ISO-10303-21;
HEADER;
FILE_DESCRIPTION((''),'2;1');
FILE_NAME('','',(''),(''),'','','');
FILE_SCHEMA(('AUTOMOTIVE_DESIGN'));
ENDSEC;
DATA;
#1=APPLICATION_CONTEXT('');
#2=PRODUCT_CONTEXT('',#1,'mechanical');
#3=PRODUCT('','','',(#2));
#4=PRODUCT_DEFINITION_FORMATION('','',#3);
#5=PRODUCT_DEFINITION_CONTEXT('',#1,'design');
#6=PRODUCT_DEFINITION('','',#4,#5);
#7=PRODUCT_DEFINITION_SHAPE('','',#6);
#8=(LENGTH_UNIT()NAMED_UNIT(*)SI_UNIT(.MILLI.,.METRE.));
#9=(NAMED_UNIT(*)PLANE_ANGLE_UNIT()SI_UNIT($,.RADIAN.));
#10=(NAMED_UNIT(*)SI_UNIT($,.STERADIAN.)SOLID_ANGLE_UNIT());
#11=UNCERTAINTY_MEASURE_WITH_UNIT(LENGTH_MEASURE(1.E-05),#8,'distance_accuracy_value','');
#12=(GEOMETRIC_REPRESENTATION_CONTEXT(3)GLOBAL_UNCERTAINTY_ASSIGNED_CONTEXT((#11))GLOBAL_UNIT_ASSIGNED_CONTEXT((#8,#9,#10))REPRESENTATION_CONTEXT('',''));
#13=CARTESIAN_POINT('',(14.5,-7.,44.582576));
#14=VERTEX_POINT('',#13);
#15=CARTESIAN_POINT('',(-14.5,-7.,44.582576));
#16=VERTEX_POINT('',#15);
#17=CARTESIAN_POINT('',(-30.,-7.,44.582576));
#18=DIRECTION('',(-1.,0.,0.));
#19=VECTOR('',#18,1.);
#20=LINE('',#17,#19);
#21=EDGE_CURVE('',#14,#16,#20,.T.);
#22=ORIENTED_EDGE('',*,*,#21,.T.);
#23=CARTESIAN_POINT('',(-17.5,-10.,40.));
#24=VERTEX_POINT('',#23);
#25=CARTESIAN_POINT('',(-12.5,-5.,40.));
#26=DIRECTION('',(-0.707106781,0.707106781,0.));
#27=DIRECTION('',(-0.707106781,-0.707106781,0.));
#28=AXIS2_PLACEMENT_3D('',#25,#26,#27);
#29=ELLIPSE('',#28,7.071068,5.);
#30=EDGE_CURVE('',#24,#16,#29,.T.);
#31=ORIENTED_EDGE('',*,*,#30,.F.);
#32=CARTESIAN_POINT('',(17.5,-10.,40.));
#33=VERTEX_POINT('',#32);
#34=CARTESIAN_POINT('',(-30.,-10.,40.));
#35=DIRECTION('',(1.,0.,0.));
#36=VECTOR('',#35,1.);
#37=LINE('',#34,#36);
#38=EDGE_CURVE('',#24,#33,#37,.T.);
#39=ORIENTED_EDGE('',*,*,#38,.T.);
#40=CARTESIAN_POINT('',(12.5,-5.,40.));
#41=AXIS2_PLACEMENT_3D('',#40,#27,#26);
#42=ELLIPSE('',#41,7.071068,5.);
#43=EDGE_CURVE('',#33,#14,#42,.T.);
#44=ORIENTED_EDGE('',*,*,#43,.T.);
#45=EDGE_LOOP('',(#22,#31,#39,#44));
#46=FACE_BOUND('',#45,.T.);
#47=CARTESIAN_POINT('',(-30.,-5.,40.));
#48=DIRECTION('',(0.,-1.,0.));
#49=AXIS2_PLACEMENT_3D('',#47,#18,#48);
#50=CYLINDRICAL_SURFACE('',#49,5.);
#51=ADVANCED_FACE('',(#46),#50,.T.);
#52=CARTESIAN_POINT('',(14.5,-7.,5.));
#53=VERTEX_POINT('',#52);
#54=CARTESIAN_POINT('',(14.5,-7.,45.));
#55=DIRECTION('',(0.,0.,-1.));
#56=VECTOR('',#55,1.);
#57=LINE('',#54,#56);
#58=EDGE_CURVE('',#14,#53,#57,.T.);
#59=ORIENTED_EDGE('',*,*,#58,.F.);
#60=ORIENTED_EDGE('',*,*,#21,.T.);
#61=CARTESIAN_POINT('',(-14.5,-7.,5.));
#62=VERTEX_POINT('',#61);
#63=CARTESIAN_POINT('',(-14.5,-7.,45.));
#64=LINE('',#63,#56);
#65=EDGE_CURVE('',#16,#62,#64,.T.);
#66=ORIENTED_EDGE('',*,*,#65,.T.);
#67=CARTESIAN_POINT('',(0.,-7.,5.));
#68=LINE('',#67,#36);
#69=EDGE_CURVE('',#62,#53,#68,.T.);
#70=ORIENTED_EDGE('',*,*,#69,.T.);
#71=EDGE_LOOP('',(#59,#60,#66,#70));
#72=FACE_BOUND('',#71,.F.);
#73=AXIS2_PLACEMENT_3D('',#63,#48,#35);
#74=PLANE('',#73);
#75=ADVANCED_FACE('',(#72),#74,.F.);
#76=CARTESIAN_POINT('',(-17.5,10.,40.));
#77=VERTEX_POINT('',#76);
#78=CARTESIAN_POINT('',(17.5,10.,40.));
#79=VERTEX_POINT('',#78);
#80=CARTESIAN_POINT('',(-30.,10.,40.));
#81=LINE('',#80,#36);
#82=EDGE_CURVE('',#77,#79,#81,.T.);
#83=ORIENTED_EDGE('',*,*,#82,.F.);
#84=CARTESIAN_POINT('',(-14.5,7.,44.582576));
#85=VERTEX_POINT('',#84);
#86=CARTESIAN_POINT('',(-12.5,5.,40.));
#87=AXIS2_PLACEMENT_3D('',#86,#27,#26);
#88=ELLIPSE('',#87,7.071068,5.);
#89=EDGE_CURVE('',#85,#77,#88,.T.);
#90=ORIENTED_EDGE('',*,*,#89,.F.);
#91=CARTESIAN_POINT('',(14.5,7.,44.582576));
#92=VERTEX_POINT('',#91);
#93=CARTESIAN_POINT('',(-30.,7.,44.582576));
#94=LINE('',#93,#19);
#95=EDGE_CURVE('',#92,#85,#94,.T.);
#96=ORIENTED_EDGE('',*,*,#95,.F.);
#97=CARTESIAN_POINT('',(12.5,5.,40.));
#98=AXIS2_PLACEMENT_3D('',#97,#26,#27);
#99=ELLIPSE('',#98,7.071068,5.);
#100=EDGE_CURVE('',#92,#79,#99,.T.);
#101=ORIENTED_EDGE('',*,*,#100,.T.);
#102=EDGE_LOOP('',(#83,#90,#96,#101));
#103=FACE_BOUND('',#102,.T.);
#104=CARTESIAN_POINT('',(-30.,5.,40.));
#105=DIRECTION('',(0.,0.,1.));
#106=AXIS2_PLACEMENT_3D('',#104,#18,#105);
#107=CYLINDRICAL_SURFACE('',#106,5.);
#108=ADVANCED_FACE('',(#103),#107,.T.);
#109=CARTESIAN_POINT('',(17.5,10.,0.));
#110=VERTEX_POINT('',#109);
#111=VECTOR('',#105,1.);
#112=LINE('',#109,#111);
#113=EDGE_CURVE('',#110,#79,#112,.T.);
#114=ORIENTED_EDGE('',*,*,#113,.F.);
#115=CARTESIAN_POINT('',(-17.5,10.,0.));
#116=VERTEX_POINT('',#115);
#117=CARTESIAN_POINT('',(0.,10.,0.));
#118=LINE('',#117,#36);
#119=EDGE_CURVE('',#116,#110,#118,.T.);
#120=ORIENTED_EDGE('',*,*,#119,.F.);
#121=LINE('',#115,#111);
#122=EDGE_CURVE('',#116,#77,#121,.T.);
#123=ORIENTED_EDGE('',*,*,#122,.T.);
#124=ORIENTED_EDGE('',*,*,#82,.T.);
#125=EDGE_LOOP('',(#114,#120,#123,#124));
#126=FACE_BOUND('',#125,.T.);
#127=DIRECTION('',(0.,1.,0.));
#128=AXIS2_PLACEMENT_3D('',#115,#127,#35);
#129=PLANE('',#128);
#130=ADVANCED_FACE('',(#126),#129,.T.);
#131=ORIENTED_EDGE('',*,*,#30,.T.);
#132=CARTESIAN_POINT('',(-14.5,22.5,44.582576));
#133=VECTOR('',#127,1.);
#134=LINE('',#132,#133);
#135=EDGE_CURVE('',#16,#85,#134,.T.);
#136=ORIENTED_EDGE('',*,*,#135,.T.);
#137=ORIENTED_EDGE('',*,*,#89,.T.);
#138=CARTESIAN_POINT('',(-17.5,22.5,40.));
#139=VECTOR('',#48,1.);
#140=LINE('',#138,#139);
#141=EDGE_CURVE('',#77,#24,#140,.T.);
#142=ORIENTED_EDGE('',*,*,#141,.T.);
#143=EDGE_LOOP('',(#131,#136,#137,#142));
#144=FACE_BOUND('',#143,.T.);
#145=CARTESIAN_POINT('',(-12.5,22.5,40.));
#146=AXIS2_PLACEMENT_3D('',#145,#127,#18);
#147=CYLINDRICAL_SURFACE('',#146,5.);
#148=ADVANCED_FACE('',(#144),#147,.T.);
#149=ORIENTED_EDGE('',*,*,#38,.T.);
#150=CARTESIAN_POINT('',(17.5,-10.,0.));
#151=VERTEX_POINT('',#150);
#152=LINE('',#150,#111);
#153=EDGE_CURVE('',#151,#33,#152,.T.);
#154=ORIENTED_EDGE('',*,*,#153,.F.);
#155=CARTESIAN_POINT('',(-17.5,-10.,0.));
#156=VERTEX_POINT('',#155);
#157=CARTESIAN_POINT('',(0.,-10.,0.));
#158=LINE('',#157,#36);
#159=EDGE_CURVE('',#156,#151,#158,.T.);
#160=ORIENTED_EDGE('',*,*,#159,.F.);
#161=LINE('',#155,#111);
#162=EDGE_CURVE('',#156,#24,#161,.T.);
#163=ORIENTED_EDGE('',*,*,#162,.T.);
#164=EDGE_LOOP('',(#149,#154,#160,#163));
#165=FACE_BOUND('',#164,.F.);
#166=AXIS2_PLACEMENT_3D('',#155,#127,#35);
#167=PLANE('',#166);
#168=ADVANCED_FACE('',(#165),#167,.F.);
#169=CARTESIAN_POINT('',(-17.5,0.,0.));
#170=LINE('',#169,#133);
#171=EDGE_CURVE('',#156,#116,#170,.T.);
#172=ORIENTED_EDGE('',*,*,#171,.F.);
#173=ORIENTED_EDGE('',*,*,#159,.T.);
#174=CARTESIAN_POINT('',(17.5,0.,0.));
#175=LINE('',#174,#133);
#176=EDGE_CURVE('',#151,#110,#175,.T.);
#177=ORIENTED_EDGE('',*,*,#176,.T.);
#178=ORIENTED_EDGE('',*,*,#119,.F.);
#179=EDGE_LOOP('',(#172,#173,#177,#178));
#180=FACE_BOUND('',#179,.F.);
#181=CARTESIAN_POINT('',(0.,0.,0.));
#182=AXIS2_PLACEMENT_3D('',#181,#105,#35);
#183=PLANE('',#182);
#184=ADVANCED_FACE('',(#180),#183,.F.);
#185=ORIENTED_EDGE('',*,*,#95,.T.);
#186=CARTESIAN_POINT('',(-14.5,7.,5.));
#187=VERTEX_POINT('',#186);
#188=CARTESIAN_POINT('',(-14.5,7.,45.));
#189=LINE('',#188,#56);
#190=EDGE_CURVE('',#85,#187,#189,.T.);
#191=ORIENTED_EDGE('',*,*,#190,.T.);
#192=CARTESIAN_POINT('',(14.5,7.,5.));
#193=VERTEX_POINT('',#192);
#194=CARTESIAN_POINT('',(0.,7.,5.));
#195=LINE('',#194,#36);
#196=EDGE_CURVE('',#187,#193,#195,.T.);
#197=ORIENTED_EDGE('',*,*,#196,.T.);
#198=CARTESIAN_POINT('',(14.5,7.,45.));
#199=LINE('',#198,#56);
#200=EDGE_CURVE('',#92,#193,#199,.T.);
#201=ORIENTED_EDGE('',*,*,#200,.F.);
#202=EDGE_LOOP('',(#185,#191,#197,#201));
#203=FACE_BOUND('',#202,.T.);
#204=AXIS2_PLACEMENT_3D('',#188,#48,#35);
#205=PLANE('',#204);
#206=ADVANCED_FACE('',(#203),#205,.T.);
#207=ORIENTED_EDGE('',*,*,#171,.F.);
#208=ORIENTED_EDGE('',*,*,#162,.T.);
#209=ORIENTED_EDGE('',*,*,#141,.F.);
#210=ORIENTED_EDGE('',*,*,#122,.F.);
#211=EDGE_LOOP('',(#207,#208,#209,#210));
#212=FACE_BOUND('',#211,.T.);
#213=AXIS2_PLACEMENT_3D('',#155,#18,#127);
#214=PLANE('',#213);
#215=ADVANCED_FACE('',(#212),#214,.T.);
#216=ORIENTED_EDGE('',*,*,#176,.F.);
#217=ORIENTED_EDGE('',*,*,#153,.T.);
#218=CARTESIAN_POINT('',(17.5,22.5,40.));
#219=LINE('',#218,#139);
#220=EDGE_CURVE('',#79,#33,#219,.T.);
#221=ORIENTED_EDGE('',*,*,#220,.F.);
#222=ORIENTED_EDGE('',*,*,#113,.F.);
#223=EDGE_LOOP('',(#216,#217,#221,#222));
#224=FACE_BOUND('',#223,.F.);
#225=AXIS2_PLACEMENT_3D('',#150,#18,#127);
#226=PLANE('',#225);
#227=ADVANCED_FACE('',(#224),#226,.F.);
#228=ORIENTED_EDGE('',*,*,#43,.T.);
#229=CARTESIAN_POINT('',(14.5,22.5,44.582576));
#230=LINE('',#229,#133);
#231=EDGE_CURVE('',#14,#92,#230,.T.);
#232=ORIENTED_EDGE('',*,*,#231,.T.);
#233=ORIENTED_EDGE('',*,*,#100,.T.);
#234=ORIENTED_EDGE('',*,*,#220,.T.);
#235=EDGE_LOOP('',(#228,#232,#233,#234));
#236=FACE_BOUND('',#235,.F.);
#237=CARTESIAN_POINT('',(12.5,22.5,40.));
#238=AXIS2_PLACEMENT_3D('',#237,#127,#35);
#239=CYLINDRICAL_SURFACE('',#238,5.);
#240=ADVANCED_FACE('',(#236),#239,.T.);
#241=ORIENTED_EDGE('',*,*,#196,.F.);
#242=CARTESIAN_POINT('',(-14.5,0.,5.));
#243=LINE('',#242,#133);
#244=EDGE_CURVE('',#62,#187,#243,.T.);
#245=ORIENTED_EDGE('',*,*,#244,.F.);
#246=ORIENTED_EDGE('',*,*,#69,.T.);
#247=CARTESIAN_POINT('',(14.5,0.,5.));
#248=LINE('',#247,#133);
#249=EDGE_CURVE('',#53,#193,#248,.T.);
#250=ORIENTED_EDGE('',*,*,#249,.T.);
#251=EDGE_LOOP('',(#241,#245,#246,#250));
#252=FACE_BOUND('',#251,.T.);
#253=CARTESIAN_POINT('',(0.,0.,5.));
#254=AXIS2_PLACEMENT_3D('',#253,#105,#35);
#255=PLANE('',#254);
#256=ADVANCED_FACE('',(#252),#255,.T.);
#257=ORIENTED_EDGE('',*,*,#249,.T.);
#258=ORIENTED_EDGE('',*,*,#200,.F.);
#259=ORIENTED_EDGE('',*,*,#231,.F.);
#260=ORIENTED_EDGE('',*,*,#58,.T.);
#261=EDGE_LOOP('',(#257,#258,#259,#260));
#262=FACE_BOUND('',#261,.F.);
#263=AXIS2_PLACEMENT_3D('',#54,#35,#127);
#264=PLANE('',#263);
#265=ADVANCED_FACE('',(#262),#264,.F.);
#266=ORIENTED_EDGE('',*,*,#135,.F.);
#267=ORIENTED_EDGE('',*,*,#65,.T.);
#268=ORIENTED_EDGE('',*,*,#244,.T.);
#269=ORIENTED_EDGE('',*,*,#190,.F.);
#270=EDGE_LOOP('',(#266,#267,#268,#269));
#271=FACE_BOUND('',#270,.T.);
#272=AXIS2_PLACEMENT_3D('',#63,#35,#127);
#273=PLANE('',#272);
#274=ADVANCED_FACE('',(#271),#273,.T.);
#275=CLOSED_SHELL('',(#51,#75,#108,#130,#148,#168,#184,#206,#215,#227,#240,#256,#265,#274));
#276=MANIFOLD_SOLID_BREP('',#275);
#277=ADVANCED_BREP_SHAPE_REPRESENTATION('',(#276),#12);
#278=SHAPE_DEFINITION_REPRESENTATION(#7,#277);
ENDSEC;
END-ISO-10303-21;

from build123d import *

# Parameters (mm, degrees)
F0_W        = 35
F0_H        = 20
F1_DEPTH    = 45
F2_W        = 29
F2_H        = 14
F3_DEPTH    = 40
F4_T1_DEPTH = 60
F4_T3_DEPTH = 45


# Not quite as in the source:
# - a fillet or chamfer that OpenCascade refuses, or shapes differently, is made with other operations: its cross-section is extruded or revolved along the edge and cut away or added


with BuildPart() as f1:
    # F0 (on Top) → F1 (new body)
    with BuildSketch(Plane.XY):
        Rectangle(F0_W, F0_H)
    extrude(amount=F1_DEPTH)

    # F2 (on face) → F3 (cut)
    with BuildSketch(Plane.XY.offset(45)):
        Rectangle(F2_W, F2_H)
    extrude(amount=-F3_DEPTH, mode=Mode.SUBTRACT)

    # F4: fillet of radius 5 on 4 edges, made by hand

    # F4_s2 → F4_t1 (cut)
    with BuildSketch(Plane.YZ.offset(-30)):
        with BuildLine():
            ThreePointArc((-10, 40), (-8.5355339059, 43.5355339059), (-5, 45))
            Line((-5, 45), (-10, 45))
            Line((-10, 45), (-10, 40))
        make_face()
        with BuildLine():
            ThreePointArc((5, 45), (8.5355339059, 43.5355339059), (10, 40))
            Line((10, 40), (10, 45))
            Line((10, 45), (5, 45))
        make_face()
    extrude(amount=F4_T1_DEPTH, mode=Mode.SUBTRACT)

    # F4_s4 → F4_t3 (cut)
    with BuildSketch(Plane.XZ.offset(-22.5)):
        with BuildLine():
            ThreePointArc((-17.5, 40), (-16.0355339059, 43.5355339059), (-12.5, 45))
            Line((-12.5, 45), (-17.5, 45))
            Line((-17.5, 45), (-17.5, 40))
        make_face()
        with BuildLine():
            ThreePointArc((17.5, 40), (16.0355339059, 43.5355339059), (12.5, 45))
            Line((12.5, 45), (17.5, 45))
            Line((17.5, 45), (17.5, 40))
        make_face()
    extrude(amount=F4_T3_DEPTH, mode=Mode.SUBTRACT)


solid = f1.part
